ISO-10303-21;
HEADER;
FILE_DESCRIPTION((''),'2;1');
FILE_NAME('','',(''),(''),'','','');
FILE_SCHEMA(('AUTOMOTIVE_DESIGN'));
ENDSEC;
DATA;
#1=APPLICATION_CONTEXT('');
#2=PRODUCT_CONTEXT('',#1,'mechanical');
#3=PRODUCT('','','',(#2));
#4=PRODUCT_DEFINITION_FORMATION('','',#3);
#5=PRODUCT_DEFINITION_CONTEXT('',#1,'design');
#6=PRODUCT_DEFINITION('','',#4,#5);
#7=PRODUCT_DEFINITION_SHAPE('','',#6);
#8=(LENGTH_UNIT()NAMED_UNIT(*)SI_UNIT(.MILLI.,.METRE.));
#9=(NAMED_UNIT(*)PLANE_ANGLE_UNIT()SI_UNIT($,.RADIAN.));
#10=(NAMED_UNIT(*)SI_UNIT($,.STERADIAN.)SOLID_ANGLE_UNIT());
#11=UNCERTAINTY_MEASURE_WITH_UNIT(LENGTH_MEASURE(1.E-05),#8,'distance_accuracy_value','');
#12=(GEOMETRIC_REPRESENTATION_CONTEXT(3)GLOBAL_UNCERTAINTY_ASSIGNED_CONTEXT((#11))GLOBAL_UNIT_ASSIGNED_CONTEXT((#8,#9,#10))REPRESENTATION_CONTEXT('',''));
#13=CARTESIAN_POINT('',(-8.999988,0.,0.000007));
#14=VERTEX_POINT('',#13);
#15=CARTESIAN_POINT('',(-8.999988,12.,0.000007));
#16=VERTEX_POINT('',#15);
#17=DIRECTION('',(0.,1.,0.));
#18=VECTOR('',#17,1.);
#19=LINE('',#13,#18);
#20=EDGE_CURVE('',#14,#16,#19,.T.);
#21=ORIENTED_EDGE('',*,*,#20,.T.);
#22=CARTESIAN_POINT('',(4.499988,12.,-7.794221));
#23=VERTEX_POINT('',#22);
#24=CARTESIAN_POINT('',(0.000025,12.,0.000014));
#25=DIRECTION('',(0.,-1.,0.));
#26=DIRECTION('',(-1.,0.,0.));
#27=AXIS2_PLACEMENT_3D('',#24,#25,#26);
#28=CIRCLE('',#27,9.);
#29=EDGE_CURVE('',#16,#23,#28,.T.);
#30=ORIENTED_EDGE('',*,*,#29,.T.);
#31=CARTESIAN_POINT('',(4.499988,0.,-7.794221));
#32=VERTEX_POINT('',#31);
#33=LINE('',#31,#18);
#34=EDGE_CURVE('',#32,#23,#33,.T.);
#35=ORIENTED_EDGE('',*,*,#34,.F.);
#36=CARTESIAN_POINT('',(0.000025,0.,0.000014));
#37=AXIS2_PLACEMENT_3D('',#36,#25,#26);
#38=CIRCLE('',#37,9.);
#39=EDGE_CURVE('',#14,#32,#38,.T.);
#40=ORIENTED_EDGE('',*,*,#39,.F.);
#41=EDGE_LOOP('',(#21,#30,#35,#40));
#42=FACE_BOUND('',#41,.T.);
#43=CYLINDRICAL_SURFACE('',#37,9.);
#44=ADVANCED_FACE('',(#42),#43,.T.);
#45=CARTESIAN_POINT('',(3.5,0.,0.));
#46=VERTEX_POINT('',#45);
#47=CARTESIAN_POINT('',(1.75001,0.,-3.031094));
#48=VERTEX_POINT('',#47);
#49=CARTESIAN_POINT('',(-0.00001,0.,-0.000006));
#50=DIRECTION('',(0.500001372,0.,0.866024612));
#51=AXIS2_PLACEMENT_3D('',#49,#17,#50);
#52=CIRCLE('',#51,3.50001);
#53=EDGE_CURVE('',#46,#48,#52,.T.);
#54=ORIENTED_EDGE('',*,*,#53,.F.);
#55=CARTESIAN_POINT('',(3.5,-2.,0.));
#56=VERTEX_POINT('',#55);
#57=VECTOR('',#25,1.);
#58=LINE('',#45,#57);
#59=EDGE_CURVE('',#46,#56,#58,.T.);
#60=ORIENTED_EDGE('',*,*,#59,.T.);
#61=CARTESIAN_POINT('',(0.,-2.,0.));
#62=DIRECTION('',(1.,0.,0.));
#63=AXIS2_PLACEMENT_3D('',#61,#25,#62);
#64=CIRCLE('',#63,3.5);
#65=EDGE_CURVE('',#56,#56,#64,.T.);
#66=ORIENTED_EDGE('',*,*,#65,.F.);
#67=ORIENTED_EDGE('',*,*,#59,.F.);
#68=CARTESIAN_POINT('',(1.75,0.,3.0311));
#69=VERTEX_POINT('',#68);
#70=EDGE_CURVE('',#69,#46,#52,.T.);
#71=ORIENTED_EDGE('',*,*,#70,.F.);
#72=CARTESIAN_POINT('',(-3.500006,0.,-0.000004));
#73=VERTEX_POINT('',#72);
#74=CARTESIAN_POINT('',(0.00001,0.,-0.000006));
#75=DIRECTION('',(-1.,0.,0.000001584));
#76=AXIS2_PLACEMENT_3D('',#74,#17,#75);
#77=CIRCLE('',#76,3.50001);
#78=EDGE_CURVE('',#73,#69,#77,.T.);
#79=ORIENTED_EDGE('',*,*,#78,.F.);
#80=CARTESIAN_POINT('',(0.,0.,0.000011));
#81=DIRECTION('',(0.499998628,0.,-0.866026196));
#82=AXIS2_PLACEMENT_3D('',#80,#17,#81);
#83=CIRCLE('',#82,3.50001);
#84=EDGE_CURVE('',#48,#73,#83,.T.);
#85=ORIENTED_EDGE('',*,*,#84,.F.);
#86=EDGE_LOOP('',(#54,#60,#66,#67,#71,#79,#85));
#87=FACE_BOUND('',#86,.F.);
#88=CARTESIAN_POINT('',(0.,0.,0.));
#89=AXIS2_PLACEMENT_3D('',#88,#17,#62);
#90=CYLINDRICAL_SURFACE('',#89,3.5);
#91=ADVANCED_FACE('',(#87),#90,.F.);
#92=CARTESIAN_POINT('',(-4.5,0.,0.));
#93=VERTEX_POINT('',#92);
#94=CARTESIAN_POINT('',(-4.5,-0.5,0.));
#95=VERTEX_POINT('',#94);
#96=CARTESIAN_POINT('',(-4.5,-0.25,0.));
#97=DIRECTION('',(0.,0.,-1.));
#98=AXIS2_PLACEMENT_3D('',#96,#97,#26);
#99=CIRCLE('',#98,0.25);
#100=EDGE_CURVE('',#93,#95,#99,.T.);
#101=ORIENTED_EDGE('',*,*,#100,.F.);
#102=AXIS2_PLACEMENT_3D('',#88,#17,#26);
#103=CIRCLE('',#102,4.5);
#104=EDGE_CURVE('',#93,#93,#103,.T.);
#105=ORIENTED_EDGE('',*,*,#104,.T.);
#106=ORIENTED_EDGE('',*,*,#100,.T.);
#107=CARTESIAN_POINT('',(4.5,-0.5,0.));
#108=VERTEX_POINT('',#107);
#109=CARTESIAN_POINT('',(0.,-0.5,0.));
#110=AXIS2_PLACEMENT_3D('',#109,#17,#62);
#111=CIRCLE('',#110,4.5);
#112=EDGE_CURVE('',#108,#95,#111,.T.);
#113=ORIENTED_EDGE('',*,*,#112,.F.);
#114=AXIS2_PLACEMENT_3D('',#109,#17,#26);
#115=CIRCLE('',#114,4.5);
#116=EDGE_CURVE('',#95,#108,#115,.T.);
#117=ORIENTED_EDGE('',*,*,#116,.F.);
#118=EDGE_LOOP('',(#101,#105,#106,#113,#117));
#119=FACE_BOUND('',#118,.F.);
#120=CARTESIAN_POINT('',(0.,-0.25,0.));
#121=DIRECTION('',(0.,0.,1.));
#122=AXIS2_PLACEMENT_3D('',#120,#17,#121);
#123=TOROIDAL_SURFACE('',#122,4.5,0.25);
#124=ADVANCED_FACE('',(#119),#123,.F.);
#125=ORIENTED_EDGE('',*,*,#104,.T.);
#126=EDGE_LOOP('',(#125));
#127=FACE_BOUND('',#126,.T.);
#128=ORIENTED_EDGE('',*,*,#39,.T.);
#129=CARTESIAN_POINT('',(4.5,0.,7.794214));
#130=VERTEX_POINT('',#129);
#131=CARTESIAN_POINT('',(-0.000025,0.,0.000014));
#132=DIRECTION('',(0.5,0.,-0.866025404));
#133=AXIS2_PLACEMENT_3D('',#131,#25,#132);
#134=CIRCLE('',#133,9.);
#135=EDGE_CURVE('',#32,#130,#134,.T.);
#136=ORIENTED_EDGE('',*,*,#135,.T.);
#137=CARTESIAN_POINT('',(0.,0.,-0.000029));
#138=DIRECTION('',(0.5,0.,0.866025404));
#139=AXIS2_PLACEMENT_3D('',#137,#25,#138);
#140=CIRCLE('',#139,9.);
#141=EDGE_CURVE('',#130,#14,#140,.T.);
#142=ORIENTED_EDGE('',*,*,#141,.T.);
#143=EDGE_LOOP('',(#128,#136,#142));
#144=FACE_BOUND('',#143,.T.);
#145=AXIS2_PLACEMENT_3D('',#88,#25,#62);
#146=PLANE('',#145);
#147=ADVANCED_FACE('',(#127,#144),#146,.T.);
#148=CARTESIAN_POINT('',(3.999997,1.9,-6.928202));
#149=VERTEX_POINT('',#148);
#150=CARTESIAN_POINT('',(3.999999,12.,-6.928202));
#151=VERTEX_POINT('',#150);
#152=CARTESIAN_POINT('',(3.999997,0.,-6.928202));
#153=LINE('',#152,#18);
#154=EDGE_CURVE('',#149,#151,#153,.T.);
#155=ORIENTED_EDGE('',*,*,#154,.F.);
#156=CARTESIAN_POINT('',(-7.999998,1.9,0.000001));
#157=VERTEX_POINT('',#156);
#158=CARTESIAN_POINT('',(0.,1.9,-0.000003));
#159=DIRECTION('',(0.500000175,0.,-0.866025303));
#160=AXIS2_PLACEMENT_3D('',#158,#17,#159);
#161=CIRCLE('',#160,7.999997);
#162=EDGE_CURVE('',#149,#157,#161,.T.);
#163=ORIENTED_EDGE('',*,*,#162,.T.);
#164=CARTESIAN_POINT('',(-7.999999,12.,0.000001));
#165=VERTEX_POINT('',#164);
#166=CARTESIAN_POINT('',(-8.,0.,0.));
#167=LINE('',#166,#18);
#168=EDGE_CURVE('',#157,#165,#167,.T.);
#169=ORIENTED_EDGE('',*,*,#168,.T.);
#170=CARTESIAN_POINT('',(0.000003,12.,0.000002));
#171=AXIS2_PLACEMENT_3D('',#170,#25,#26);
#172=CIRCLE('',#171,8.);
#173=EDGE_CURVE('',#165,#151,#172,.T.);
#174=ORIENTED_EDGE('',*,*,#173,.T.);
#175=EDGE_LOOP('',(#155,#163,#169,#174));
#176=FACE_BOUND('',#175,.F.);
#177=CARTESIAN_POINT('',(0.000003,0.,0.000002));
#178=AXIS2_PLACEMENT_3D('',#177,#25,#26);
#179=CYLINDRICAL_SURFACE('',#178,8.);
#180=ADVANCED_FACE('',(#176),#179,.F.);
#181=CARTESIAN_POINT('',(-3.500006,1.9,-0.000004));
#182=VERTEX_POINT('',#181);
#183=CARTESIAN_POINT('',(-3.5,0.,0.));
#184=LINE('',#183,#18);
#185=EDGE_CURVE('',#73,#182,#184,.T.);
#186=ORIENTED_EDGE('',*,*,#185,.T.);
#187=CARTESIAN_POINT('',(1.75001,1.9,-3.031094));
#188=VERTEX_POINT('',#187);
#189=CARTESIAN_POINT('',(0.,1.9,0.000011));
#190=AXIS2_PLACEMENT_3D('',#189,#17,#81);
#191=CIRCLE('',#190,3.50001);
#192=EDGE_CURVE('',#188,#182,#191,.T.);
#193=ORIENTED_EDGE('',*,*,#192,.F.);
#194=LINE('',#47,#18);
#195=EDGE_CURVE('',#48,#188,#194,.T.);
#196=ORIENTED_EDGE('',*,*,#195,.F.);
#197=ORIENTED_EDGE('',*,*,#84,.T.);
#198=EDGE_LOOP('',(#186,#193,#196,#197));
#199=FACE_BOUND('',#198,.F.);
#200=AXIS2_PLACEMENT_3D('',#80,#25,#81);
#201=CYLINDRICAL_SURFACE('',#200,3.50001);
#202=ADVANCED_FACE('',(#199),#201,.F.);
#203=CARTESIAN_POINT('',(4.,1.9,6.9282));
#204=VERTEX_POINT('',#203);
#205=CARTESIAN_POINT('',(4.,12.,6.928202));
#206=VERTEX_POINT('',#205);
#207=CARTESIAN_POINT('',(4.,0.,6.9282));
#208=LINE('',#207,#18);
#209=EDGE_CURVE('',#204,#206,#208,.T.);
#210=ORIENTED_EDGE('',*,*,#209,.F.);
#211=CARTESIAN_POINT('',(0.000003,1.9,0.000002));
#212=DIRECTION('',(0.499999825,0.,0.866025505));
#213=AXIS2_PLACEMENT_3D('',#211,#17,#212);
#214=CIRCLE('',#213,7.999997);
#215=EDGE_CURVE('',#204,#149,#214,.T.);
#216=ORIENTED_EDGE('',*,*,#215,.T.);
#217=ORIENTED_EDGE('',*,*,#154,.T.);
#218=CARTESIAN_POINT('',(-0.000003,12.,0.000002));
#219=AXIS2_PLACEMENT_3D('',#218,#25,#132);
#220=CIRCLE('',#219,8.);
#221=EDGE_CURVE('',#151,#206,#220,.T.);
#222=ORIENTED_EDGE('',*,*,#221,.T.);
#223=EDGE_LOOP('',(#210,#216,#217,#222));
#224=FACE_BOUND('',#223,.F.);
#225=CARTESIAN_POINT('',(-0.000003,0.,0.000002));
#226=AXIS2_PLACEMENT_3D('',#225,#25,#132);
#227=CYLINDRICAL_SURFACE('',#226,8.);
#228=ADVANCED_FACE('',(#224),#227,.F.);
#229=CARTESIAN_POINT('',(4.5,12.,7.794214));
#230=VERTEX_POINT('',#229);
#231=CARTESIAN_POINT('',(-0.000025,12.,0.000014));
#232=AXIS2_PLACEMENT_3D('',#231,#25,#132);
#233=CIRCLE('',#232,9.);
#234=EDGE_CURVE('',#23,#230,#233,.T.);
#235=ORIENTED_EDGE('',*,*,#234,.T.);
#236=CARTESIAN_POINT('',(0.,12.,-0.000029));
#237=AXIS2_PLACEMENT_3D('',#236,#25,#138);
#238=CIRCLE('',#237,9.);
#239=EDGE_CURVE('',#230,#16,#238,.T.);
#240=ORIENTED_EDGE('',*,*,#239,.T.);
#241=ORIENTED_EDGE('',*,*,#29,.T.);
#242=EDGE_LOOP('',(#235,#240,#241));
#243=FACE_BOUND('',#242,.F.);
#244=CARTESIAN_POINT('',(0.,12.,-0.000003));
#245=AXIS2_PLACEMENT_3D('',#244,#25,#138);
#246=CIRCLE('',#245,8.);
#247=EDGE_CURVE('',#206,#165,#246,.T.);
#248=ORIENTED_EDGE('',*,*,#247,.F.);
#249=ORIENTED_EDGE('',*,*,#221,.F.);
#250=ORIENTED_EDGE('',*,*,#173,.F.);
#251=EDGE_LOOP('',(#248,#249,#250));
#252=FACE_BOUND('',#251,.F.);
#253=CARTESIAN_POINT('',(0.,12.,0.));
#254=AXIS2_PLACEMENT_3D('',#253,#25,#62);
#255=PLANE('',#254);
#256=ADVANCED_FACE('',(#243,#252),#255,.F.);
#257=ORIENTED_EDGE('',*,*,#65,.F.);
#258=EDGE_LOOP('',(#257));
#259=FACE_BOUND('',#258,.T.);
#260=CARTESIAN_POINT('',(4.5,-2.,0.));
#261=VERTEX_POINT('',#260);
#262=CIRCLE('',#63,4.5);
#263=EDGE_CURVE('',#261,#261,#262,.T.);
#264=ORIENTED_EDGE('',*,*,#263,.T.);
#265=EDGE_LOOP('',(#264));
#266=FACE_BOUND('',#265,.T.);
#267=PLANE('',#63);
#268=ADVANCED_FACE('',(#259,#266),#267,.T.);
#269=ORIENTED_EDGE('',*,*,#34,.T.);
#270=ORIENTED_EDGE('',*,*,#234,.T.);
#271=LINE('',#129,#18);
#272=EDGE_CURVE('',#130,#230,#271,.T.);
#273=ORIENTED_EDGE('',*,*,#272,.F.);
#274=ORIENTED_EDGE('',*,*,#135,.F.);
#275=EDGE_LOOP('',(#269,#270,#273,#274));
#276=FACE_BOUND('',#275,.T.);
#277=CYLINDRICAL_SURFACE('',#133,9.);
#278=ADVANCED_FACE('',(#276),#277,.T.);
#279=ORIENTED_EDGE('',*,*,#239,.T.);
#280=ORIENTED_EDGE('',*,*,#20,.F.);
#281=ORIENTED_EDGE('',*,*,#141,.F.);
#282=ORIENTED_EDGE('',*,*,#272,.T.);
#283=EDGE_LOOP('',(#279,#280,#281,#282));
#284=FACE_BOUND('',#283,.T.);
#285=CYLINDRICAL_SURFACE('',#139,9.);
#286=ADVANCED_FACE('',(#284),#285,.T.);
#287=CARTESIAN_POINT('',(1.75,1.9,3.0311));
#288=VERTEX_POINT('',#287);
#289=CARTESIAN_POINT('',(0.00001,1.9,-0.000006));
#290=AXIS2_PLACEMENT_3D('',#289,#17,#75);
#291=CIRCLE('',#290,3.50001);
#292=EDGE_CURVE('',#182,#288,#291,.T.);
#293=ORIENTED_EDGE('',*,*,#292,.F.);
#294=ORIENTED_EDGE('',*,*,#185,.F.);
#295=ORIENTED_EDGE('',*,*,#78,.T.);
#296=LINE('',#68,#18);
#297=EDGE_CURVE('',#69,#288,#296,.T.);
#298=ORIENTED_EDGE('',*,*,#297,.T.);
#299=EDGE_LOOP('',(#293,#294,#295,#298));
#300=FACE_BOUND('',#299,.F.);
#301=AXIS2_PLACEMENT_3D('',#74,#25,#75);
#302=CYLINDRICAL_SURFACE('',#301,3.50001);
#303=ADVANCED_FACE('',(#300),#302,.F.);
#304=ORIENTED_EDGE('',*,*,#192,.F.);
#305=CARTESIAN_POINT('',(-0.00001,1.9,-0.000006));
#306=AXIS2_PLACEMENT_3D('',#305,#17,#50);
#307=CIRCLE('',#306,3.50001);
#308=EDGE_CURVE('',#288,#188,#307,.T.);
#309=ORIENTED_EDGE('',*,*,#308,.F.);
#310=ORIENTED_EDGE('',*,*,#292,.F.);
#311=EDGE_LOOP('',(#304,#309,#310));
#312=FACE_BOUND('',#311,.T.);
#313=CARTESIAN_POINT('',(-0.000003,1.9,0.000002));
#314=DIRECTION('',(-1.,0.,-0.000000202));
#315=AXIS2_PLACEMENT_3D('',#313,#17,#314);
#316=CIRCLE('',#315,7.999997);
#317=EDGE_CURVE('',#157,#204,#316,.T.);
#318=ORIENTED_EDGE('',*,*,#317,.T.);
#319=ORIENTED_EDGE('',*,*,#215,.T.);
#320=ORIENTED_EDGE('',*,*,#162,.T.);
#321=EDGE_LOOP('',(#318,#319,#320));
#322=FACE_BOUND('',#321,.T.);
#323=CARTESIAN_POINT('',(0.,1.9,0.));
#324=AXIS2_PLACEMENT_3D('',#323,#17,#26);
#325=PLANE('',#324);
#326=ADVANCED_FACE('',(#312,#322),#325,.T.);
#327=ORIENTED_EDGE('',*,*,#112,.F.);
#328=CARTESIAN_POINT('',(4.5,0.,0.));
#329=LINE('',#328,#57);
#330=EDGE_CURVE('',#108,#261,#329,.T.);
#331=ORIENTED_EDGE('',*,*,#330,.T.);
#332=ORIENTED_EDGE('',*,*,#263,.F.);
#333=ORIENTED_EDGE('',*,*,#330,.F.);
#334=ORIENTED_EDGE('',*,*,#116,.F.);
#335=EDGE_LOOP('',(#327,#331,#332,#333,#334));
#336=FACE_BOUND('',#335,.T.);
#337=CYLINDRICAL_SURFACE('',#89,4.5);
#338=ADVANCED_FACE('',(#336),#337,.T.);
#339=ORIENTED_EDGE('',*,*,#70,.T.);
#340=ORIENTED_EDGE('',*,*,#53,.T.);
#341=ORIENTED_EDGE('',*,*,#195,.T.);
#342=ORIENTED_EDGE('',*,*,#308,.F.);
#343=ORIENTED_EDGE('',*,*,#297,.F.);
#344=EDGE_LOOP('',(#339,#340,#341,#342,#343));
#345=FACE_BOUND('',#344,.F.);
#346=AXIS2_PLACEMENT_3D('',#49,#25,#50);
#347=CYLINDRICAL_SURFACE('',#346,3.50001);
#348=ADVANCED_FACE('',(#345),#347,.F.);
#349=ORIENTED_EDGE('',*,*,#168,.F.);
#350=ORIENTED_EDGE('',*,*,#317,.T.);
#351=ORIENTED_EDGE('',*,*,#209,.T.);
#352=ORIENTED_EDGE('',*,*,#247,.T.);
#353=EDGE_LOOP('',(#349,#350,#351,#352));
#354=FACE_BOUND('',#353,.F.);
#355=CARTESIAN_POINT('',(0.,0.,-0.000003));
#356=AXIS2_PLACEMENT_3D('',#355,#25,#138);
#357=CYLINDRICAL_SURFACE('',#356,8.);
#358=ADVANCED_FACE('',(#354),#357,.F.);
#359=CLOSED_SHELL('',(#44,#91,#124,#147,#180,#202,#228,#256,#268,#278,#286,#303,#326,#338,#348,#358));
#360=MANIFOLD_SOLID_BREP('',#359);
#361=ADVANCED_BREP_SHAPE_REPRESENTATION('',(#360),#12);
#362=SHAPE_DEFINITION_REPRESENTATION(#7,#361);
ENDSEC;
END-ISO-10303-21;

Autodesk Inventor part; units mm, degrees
ref_plane "XZ Plane" through (0, 0, 0) normal (0, 1, 0) x (-1, 0, 0)
ref_plane "XY Plane" through (0, 0, 0) normal (0, 0, 1) x (1, 0, 0)
sketch "スケッチ6" plane through (0, 0, 0) normal (0, 1, 0) x (-1, 0, 0)
  arc A0 (9, 0) -> (-4.5, 7.7942) centre (0, 0) ccw
  line L0 (0, 0) -> (-4.5, 7.7942) construction
  line L1 (0, 0) -> (9, 0) construction
  arc A1 (8, 0) -> (-4, 6.9282) centre (0, 0) ccw
  line L2 (0, 0) -> (-4, 6.9282) construction
  line L3 (0, 0) -> (8, 0) construction
  arc A2 (7, 0) -> (-3.5, 6.0622) centre (0, 0) ccw
  line L4 (0, 0) -> (-3.5, 6.0622) construction
  line L5 (0, 0) -> (7, 0) construction
  arc A3 (4.7, 0) -> (-2.35, 4.0703) centre (0, 0) ccw
  arc A4 (3.5, 0) -> (-1.75, 3.0311) centre (0, 0) ccw
  line L6 (4.5041, 1.3429) -> (6.7082, 2)
  arc A5 (10.9533, 0) -> (5.4767, 9.4859) centre (0, 0) ccw
  line L7 (0, 0) -> (5.4767, 9.4859) construction
  line L8 (0, 0) -> (10.9533, 0) construction
  line L9 (-1.0891, 4.5721) -> (-1.6221, 6.8095)
  line L10 (0, 0) -> (9, 0)
  line L11 (0, 0) -> (-4.5, 7.7942)
  point P0 (-1.6221, 6.8095)
  point P1 (-4, 6.9282)
  point P2 (-1.75, 3.0311)
  dimension "d33" = 9
  dimension "d34" = 120
  dimension "d35" = 120
  dimension "d36" = 1
  dimension "d37" = 120
  dimension "d38" = 2
  dimension "d39" = 4.7
  dimension "d40" = 3.5
  dimension "d41" = 2
  dimension "d42" = 60
extrude "押し出し6" add sketch "スケッチ6" along normal blind 1.9 contours L10 A2 L11 A1 | L10 A3 L6 A2 | A2 L9 A3 L11 | L6 A3 L9 A2 | L10 A4 L11 A3
sketch "スケッチ7" plane through (0, 0, 0) normal (0, -1, 0) x (1, 0, 0)
  arc A0 (4, 6.9282) -> (-8, 0) centre (0, 0) ccw projected
  arc A1 (4.5, 7.7942) -> (-9, 0) centre (0, 0) ccw
  arc A2 (4, 6.9282) -> (-8, 0) centre (0, 0) ccw
  line L0 (0, 0) -> (4, 6.9282) construction
  line L1 (0, 0) -> (-8, 0) construction
  line L2 (4.5, 7.7942) -> (4, 6.9282)
  line L3 (-9, 0) -> (-8, 0)
  dimension "d45" = 120
  dimension "d46" = 9
  dimension "d47" = 8
  dimension "d48" = 120
extrude "押し出し7" add sketch "スケッチ7" against normal blind 12
pattern_circular "円形状パターン1" count 3 over 360 about axis through (0, 0, 0) along (0, 1, 0)
sketch "スケッチ9" plane through (0, 0, 0) normal (0, -1, 0) x (1, 0, 0)
  circle A0 centre (0, 0) radius 4.5
  circle A1 centre (0, 0) radius 3.5 projected
  dimension "d62" = 9
extrude "押し出し9" add sketch "スケッチ9" along normal blind 2
sketch "スケッチ11" plane through (0, 0, 0) normal (1, 0, 0) x (0, 1, 0)
  line L0 (0, 4.5) -> (-2, 4.5) projected
  circle A0 centre (-0.25, 4.5) radius 0.25
  line L1 (0, 9) -> (0, -9) projected
  point P0 (0, 0)
  point P1 (-0.5, 4.5)
  dimension "d73" = 0.5
sketch3d "3D スケッチ1"
  arc A0 (4.5, 0, 0) -> (0, 0, -4.5) centre (0, 0, 0) ccw
  arc A1 (0, 0, -4.5) -> (-4.5, 0, 0) centre (0, 0, 0) ccw
  arc A2 (-4.5, 0, 0) -> (0, 0, 4.5) centre (0, 0, 0) ccw
  arc A3 (0, 0, 4.5) -> (4.5, 0, 0) centre (0, 0, 0) ccw
sweep "スイープ1" cut profiles "スケッチ11" path "3D スケッチ1" picked at (-0.194, 4.3148) contours A0 L0
properties part number "wheel" material "ABS プラスチック"
